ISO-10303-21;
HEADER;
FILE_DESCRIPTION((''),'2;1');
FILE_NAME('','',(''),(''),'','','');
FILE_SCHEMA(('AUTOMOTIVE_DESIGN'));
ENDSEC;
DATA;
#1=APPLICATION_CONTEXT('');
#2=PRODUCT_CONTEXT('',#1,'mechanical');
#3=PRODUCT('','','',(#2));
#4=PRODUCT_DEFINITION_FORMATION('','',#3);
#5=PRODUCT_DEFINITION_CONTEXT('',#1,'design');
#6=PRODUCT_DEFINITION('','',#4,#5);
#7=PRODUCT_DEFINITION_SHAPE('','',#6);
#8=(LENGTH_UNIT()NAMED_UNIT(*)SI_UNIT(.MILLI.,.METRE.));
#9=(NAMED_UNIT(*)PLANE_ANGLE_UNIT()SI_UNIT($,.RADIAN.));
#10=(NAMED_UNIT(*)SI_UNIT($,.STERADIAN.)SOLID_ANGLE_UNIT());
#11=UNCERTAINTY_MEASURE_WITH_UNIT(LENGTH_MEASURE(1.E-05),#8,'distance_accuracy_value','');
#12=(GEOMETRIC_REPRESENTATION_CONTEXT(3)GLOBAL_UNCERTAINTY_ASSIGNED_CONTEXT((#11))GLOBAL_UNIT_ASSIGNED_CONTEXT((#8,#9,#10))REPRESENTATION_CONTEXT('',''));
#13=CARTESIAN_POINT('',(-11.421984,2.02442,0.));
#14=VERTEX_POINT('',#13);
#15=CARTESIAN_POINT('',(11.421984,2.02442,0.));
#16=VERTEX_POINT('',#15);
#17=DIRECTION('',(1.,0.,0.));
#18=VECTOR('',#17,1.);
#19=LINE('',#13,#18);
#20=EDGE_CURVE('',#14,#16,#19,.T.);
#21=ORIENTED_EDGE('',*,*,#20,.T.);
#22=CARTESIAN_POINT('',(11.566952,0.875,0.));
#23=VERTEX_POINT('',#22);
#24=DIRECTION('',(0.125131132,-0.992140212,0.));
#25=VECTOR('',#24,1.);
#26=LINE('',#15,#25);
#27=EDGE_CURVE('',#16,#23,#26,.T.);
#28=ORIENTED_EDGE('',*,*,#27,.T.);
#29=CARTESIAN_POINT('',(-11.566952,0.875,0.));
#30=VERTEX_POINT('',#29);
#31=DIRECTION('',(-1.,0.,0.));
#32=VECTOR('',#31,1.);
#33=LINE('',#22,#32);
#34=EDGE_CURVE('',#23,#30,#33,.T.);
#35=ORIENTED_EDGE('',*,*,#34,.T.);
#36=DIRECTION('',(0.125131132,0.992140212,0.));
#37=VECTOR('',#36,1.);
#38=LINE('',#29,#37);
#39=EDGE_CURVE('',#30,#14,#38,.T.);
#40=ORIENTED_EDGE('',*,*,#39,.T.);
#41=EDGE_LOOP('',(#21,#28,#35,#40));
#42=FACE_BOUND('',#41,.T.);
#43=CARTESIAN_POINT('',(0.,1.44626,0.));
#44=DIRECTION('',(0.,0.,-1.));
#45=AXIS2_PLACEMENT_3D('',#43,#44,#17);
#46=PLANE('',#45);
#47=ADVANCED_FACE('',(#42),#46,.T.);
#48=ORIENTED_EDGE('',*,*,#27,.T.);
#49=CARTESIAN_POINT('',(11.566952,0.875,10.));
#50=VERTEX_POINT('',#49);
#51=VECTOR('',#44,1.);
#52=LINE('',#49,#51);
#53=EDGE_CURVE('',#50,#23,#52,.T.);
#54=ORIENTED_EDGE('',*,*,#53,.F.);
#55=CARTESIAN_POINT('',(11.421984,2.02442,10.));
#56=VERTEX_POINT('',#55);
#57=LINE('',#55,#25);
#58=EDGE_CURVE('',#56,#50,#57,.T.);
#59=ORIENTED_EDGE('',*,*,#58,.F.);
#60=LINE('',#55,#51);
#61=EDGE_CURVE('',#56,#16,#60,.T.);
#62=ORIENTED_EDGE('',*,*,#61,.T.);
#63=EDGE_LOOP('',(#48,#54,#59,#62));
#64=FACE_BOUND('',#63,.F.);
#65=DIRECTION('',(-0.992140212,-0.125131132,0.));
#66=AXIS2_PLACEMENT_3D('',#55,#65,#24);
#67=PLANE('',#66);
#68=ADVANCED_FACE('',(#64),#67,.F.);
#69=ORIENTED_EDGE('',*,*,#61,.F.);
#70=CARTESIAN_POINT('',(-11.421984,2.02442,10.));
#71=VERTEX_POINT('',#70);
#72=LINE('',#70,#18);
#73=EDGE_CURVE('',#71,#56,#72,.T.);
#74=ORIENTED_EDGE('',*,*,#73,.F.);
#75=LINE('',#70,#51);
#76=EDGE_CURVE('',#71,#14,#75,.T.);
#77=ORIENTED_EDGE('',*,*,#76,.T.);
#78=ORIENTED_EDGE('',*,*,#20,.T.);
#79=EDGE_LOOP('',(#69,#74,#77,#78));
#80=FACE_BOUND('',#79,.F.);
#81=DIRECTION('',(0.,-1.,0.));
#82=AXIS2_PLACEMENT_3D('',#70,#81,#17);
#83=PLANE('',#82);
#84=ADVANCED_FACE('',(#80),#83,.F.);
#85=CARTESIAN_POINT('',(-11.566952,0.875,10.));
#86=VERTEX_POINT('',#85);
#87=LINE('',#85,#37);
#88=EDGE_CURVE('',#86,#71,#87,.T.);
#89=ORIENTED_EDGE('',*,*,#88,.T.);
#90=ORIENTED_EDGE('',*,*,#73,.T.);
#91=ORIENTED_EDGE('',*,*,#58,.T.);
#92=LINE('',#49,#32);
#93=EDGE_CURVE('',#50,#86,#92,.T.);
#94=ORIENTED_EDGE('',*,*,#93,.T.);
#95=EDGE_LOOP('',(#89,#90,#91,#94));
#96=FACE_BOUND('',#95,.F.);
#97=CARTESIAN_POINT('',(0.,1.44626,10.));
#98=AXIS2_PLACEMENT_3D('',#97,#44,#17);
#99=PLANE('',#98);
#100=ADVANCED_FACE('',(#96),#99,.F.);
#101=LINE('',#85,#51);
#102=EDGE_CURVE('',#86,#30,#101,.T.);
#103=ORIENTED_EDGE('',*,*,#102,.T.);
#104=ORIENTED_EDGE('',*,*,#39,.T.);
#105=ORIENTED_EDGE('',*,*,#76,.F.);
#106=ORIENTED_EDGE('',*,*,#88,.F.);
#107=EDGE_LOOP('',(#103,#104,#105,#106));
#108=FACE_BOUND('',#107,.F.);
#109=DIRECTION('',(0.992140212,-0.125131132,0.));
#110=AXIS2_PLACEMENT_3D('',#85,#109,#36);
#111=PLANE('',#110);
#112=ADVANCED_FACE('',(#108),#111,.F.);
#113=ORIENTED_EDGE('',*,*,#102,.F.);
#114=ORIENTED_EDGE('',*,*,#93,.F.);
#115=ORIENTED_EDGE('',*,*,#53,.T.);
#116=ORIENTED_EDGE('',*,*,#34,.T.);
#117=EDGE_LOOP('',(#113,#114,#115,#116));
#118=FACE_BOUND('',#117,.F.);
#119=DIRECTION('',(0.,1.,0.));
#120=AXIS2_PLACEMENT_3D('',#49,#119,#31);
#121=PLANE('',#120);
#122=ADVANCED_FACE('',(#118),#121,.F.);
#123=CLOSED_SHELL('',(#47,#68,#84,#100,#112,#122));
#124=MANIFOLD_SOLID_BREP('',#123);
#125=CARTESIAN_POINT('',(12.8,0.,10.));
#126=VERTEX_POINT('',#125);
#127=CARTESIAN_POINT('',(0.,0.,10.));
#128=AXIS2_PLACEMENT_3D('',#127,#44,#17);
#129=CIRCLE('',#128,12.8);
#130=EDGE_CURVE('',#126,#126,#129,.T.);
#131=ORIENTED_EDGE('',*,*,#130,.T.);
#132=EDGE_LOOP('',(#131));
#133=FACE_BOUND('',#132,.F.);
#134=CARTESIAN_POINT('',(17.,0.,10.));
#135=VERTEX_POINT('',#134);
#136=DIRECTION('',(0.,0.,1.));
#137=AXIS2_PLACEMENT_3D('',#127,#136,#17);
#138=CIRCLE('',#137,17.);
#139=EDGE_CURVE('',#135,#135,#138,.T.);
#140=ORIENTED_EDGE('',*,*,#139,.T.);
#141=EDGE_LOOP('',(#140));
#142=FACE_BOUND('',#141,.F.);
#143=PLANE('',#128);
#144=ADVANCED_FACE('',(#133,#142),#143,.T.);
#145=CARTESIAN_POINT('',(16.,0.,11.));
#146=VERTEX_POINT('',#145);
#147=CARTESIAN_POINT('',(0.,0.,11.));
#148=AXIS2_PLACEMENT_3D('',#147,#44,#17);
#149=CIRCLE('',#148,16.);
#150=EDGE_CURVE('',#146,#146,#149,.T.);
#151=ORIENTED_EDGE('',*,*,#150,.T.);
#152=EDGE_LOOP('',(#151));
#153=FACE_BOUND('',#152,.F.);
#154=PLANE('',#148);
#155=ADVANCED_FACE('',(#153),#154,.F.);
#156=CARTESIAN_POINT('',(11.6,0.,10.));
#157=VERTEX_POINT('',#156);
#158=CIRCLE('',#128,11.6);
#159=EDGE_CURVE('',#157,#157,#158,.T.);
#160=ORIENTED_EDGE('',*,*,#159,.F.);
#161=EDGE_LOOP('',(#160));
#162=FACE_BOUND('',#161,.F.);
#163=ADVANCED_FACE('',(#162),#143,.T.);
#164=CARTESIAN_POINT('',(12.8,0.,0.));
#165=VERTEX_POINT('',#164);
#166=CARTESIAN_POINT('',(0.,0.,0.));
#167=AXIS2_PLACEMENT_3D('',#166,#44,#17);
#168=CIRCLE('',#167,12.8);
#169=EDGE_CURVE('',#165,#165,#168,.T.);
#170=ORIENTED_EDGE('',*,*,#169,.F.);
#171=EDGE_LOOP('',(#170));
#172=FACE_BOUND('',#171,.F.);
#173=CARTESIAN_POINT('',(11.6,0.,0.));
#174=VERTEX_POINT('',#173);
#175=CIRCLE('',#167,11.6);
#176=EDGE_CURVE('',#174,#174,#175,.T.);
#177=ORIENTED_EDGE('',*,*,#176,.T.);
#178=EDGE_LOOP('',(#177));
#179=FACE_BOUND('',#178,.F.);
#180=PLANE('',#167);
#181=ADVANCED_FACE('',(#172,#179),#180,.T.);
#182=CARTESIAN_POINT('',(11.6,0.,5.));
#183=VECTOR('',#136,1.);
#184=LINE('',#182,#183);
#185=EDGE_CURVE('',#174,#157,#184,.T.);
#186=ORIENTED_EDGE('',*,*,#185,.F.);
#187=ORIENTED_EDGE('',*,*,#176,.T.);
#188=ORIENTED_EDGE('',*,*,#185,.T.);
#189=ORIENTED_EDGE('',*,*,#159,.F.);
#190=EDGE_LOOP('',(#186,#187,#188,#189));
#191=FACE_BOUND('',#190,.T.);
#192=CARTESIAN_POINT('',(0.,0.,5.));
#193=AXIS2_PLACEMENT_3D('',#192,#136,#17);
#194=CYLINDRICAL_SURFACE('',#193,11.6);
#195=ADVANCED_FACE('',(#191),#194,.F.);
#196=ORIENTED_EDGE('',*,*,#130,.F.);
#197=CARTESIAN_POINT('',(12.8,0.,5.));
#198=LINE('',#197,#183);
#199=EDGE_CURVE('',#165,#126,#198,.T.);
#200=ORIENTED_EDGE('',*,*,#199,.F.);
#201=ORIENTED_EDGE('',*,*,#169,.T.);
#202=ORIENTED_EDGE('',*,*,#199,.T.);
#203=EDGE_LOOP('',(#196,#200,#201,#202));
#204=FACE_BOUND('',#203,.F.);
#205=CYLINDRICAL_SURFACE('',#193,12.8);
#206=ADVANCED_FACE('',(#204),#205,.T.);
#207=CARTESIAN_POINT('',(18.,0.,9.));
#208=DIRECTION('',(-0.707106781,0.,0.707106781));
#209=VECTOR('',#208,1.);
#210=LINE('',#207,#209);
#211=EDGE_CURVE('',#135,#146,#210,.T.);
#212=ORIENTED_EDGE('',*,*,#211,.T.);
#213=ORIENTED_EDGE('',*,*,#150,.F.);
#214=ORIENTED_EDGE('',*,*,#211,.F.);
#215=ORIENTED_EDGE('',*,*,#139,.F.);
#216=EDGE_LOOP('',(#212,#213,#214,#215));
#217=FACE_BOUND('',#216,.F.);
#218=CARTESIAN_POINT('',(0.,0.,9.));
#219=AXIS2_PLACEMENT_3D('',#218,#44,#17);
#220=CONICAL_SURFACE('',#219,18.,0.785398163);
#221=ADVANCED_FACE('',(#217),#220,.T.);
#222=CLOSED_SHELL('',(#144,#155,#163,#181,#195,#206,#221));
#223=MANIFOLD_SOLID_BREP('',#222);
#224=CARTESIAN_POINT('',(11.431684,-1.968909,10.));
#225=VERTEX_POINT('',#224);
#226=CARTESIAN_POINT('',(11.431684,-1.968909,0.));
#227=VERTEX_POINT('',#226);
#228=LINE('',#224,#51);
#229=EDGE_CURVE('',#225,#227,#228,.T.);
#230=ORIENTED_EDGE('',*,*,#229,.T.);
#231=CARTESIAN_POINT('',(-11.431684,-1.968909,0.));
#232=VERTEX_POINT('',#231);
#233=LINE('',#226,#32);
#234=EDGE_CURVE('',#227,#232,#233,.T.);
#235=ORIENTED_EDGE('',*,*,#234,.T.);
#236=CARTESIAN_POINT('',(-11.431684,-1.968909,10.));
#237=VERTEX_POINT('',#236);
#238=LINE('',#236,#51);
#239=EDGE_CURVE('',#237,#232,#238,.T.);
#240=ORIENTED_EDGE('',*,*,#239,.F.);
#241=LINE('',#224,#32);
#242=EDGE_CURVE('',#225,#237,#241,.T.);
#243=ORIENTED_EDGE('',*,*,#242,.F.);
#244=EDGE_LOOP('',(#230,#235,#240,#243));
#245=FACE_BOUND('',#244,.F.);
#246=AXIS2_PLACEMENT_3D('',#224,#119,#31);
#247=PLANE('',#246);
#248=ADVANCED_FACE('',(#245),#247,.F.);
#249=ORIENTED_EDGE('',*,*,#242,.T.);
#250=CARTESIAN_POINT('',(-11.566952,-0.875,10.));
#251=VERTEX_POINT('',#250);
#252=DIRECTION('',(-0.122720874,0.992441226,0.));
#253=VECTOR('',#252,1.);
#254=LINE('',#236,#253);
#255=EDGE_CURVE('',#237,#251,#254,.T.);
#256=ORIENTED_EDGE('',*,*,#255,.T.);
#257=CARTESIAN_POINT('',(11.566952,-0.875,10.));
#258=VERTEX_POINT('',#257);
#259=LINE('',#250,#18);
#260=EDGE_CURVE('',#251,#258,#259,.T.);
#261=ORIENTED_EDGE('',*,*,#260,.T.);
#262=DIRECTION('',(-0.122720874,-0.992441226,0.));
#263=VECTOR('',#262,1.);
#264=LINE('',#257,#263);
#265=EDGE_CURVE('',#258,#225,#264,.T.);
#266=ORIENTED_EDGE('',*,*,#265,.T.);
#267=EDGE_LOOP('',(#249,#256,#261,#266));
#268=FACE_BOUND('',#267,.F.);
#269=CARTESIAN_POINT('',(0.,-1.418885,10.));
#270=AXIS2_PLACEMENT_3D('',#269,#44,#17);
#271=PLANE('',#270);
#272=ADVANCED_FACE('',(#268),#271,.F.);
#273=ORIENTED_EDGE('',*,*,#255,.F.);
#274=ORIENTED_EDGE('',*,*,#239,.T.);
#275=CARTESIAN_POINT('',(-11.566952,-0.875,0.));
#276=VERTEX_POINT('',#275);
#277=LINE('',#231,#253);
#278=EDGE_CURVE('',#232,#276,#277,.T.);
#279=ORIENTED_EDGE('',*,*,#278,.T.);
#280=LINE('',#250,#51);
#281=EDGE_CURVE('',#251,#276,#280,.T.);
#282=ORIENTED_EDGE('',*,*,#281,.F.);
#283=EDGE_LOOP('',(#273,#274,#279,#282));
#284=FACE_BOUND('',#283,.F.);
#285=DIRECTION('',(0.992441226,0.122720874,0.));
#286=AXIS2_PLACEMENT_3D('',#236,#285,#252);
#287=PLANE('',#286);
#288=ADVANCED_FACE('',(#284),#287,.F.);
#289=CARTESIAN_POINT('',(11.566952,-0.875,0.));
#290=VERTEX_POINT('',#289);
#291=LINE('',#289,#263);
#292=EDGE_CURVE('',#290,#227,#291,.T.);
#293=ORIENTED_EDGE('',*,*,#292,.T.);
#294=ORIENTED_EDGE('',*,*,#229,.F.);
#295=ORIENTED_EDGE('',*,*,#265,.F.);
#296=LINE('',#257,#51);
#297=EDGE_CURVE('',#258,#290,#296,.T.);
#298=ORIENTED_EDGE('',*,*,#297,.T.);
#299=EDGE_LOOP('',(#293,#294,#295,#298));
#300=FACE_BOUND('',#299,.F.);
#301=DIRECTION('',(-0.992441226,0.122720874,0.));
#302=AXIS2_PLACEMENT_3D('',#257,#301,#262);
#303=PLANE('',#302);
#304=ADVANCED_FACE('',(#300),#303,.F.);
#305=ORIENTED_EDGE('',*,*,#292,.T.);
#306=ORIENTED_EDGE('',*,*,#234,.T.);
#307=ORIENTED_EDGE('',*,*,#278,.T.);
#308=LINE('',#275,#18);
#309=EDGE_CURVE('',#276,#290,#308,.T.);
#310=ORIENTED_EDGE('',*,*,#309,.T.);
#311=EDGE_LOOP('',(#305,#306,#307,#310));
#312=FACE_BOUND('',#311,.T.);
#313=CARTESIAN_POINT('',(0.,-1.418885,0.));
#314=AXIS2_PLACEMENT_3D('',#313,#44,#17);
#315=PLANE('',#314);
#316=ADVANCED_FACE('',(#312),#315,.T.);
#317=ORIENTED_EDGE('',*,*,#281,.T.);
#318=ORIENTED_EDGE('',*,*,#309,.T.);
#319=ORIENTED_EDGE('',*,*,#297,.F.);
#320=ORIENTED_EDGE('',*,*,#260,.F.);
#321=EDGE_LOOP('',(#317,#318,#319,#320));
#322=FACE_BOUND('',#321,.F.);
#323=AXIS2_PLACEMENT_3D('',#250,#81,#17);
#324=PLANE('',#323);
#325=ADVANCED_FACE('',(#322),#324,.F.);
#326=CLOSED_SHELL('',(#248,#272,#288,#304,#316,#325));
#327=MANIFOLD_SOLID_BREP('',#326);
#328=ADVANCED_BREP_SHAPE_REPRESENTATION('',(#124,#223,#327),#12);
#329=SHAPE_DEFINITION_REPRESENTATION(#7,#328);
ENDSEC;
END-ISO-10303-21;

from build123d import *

# Parameters (mm, degrees)
F0_W     = 1.2
F0_H     = 10
F4_DEPTH = 10


# Not quite as in the source:
# - a fillet or chamfer that OpenCascade refuses, or shapes differently, is made with other operations: its cross-section is extruded or revolved along the edge and cut away or added


with BuildPart() as f1:
    # F0 (on Front) → F1 (revolve)
    with BuildSketch(Plane.XZ):
        Polygon((0, 11), (0, 10), (11.6, 10), (12.8, 10), (18, 10), (18, 11), align=None)
        with Locations((12.2, 5)):
            Rectangle(F0_W, F0_H)
    revolve(axis=Axis((0, 0, 10.5), (0, 0, -1)))

    # F2: chamfer of 2 on 1 edges, made by hand

    # F2_s1 → F2_t2 (revolve, cut)
    with BuildSketch(Plane.XZ):
        Polygon((18, 9), (16, 11), (18, 11), align=None)
    revolve(axis=Axis((0, 0, 11), (0, 0, -1)), mode=Mode.SUBTRACT)


with BuildPart() as f4:
    # F3 (on face) → F4 (new body)
    with BuildSketch(Plane(origin=(0, 0, 10), x_dir=(1, 0, 0), z_dir=(0, 0, -1))):
        Polygon((-11.4316838985, 1.9689091509), (-11.5669518457, 0.875), (11.5669518457, 0.875), (11.4316838985, 1.9689091509), align=None)
    extrude(amount=F4_DEPTH)


with BuildPart() as f4b:
    # F3 (on face) → F4, piece 2 (new body)
    with BuildSketch(Plane(origin=(0, 0, 10), x_dir=(1, 0, 0), z_dir=(0, 0, -1))):
        Polygon((11.5669518457, -0.875), (-11.5669518457, -0.875), (-11.421984153, -2.0244204128), (11.421984153, -2.0244204128), align=None)
    extrude(amount=F4_DEPTH)


solid = Compound([f1.part, f4.part, f4b.part])
